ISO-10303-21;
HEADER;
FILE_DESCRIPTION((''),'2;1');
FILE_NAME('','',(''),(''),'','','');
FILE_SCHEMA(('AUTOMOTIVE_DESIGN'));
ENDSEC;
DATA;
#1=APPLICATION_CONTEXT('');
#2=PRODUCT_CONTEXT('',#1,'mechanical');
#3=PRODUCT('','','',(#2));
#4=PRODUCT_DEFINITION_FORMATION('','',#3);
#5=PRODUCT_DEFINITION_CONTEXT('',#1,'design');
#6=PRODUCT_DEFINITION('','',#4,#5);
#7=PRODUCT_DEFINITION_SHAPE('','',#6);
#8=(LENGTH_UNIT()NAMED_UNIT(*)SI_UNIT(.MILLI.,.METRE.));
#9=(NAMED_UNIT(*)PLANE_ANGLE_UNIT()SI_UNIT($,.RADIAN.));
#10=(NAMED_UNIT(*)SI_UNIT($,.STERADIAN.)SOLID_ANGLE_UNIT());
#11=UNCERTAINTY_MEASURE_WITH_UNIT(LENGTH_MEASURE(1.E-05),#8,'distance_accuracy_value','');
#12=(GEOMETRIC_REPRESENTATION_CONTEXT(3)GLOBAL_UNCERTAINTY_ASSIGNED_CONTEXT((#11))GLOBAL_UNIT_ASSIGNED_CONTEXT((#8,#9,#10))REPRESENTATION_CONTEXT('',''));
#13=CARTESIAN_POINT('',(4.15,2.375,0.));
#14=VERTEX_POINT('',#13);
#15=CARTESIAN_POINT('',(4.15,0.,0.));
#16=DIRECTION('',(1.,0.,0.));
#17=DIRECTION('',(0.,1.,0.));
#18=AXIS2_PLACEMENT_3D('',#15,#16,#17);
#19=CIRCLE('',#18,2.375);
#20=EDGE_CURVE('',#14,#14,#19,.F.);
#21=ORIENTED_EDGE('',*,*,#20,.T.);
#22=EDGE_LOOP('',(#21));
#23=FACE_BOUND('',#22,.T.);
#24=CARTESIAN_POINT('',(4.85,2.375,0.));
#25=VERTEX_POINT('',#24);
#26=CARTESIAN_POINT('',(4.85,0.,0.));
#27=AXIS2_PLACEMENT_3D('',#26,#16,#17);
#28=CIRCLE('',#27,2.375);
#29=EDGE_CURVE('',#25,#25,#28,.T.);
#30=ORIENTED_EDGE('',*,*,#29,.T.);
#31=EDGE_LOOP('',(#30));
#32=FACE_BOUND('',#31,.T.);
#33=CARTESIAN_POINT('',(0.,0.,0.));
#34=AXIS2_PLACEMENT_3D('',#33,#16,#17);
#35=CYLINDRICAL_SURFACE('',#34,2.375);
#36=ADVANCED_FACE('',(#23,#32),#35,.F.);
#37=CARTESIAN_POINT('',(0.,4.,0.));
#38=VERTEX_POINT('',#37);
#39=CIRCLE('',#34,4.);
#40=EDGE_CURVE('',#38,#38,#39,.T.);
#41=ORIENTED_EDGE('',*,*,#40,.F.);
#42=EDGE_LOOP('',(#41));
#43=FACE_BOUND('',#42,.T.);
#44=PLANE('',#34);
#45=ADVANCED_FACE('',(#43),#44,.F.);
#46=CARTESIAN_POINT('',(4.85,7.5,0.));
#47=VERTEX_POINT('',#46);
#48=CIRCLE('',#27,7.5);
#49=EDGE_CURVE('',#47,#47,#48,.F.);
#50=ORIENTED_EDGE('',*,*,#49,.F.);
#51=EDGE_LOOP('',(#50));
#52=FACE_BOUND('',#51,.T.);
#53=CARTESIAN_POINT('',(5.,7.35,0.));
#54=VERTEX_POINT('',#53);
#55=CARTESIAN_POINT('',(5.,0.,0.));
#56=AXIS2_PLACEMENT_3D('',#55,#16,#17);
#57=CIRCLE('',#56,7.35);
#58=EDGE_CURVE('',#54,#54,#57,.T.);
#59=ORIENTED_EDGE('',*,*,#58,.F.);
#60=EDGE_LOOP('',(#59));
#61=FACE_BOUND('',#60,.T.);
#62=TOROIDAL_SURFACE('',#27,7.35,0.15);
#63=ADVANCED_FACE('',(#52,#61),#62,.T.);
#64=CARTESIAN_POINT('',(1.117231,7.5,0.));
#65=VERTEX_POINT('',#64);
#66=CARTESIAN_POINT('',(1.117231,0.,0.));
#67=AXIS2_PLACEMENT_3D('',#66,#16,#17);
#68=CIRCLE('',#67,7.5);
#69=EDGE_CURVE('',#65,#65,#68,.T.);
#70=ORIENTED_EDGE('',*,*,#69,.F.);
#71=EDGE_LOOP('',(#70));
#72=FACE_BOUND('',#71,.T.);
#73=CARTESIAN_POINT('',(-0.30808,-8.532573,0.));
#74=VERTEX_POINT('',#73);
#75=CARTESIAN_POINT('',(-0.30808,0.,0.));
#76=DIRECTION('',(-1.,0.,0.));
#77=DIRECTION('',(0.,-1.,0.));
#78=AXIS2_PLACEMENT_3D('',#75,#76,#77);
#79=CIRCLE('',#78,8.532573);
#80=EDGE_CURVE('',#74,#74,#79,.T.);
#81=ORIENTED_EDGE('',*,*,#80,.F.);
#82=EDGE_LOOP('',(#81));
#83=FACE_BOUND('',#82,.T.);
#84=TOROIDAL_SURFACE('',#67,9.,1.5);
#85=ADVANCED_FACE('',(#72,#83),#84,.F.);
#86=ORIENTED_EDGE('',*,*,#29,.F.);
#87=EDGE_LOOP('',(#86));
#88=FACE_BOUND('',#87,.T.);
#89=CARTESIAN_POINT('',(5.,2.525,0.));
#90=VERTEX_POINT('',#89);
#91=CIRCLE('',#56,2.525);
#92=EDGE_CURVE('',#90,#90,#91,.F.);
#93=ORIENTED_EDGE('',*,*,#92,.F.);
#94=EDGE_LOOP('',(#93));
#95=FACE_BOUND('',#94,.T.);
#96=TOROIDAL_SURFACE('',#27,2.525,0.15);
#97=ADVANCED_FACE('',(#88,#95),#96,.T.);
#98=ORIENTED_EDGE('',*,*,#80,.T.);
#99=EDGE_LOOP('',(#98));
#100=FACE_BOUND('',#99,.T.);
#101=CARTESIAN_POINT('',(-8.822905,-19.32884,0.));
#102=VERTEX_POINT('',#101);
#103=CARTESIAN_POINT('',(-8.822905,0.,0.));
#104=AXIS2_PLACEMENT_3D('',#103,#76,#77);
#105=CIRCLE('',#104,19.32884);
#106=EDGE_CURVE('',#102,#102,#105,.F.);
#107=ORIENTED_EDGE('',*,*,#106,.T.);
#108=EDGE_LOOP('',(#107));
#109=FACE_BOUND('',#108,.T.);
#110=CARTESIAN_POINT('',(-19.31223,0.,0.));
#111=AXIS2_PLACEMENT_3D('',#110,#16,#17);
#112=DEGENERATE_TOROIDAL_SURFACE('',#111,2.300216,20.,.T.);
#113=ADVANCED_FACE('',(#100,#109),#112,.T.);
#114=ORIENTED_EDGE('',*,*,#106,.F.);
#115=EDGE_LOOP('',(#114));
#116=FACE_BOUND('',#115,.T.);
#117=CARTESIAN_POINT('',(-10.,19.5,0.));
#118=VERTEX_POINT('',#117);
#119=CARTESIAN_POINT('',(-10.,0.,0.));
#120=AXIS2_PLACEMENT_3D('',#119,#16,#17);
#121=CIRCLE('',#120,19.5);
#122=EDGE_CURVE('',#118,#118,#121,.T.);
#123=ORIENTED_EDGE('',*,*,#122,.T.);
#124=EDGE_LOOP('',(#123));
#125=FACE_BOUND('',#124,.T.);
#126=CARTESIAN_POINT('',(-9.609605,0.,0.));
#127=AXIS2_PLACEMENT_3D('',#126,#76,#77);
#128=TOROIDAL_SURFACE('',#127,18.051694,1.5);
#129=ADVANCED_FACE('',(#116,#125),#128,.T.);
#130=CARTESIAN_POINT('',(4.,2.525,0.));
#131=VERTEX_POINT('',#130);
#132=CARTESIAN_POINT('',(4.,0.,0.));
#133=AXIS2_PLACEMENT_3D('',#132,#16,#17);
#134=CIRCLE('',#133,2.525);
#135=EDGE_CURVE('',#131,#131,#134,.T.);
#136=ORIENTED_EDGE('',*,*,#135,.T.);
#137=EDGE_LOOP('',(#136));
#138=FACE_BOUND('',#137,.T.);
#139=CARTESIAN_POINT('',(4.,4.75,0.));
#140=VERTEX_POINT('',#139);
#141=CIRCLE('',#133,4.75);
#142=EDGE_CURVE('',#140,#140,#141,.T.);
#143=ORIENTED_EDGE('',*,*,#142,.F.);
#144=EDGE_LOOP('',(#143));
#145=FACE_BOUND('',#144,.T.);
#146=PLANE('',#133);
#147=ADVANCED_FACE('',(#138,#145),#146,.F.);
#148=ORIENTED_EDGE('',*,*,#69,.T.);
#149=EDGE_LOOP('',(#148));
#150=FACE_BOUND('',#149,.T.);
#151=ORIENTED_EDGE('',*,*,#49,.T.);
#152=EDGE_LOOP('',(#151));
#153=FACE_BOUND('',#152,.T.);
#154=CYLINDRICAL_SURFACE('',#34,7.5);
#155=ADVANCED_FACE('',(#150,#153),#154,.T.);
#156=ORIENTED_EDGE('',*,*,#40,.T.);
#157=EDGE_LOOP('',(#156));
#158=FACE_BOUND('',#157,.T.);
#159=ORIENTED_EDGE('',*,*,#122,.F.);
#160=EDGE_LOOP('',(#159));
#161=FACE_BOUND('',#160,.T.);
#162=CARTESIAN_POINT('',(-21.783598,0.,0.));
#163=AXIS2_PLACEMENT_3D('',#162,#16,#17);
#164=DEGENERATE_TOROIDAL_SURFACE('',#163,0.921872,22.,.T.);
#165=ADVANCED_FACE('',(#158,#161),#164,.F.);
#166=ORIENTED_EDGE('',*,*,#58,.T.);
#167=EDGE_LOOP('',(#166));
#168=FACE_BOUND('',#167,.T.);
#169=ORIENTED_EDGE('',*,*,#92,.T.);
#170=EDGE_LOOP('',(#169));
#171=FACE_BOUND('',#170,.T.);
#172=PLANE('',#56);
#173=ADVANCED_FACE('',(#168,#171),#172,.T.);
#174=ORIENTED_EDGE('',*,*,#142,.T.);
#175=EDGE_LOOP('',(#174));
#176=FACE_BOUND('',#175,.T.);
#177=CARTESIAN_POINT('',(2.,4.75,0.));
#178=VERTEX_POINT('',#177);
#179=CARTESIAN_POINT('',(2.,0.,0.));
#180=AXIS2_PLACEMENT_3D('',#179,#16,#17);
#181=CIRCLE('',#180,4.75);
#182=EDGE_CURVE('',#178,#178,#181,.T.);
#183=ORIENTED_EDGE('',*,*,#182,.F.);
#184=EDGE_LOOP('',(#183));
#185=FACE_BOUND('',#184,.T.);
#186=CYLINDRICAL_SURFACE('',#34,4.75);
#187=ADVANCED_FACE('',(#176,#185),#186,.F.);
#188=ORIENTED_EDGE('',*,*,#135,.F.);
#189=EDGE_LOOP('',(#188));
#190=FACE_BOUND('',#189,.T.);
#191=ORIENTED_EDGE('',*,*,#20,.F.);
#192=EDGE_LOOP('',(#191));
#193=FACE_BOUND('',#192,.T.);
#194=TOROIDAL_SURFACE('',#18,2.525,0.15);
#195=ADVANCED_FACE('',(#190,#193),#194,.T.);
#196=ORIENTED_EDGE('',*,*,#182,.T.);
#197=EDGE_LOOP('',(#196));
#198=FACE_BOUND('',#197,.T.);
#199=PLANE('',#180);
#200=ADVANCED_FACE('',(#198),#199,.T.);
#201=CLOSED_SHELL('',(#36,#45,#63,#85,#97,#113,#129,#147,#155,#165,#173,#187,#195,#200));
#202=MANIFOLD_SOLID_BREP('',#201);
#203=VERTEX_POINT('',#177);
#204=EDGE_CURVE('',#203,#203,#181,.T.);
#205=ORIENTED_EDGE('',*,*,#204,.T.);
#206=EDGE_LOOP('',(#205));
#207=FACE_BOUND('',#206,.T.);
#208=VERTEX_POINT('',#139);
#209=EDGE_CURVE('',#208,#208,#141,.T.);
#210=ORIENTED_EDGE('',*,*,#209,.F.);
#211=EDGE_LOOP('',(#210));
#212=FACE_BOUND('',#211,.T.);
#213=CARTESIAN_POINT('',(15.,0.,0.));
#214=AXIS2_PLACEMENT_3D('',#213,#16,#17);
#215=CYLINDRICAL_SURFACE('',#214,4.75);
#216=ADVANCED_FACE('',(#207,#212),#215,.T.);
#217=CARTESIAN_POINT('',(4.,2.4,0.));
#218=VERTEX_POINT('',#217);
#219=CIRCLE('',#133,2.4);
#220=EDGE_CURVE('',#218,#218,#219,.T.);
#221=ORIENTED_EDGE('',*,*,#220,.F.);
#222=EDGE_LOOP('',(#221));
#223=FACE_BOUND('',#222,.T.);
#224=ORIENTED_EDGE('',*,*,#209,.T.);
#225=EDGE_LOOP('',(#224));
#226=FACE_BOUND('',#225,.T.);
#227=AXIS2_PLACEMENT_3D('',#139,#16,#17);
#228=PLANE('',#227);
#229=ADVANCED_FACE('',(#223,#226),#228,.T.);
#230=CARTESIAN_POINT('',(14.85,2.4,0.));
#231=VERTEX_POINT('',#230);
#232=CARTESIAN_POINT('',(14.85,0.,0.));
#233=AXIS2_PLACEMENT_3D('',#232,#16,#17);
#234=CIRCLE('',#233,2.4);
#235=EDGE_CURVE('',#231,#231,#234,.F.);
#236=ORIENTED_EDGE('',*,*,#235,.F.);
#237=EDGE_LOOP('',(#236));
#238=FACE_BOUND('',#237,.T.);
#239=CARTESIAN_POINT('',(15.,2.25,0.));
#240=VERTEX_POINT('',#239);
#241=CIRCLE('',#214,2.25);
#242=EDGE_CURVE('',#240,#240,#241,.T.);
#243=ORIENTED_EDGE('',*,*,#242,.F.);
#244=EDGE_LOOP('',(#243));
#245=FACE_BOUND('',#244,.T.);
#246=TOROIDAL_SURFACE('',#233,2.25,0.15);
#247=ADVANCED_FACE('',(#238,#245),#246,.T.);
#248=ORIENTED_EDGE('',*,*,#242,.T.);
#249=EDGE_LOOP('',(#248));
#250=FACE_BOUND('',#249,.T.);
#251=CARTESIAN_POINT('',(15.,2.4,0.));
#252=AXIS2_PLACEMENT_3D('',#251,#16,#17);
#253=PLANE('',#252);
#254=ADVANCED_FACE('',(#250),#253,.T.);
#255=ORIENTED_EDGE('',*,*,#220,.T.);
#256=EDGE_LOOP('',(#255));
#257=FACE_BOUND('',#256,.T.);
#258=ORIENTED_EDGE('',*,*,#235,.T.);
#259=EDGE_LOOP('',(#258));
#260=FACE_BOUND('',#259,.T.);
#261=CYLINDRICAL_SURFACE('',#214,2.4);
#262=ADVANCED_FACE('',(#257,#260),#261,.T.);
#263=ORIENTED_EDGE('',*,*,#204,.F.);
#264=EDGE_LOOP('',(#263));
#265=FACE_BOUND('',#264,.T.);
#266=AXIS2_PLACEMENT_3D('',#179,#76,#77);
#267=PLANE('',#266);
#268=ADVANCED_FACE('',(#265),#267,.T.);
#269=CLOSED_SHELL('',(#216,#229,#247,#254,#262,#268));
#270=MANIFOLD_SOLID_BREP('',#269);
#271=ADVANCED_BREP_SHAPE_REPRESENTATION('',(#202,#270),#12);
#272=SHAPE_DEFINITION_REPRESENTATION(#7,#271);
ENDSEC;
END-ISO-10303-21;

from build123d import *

# Parameters (mm, degrees)
FILLET1_R = 0.15
FILLET2_R = 1.5
FILLET3_R = 0.15


with BuildPart() as part:
    # Sketch1 → Revolve1 (revolve)
    with BuildSketch(Plane.XY):
        with BuildLine():
            Line((-4.6e-16, 4.000000000000002), (0, 0))
            Line((0, 0), (2, 0))
            Line((2, 0), (2, 4.75))
            Line((2, 4.75), (4, 4.75))
            Line((4, 4.75), (4, 2.375))
            Line((4, 2.375), (5, 2.375))
            Line((5, 2.375), (4.999999999999999, 7.5))
            Line((4.999999999999999, 7.5), (-8.7e-16, 7.5))
            ThreePointArc((0, 7.5), (-3.6948542111989937, 14.794116631040804), (-9.999999999999998, 20))
            Line((-10, 20), (-10, 19.5))
            ThreePointArc((-9.999999999999995, 19.500000000000004), (-3.297071481987519, 12.848663560008053), (7.11e-15, 4.000000000000002))
        make_face()
    revolve(axis=Axis((0, 0, 0), (-1, -1.2e-16, 0)))

    # Fillet1
    fillet1_edges = [part.edges().sort_by_distance(p)[0] for p in [
        (5, -2.374999999999999, -2.9e-16),
        (4, -2.374999999999999, -2.9e-16),
        (5.000000000000001, -7.499999999999998, -9.2e-16),
    ]]
    fillet(fillet1_edges, radius=FILLET1_R)

    # Fillet2
    # the kernel refuses this fillet: 1.5 mm, written as the material it adds along each edge
    with BuildSketch(Plane(origin=(2.26e-15, 0, 0), x_dir=(-1.2e-16, 1, 0), z_dir=(0, 0, 1))) as fillet2_piece_1:
        with BuildLine():
            CenterArc((9, -1.1172309258012287), FILLET2_R, 108.1567582497087, 71.84324175029133)
            ThreePointArc((8.532573186973417, 0.308080329491387), (8.018361800934953, 0.14708482432521688), (7.5, 0))
            Line((7.5, 0), (7.5, -1.1172309258012287))
        make_face()
    revolve(axis=Axis((2.26e-15, 0, 0), (-1, -1.2e-16, 0)))
    # the kernel refuses this fillet: 1.5 mm, written as the material it takes off along each edge
    with BuildSketch(Plane(origin=(-9.999999999999996, -1.22e-15, 0), x_dir=(-9e-17, 1, 0), z_dir=(0, 0, 1))) as fillet2_2_piece_1:
        with BuildLine():
            CenterArc((18.05169355974905, -0.39039525500277056), FILLET2_R, 328.3676814772994, 46.718016592573825)
            Line((19.499999999999662, -9.055e-14), (20, 1.78e-15))
            ThreePointArc((20, 1.78e-15), (19.674391539993568, -0.5942328025349592), (19.328840414867702, -1.1770946324402587))
        make_face()
    revolve(axis=Axis((-9.999999999999996, -1.22e-15, 0), (-1, -1.2e-16, 0)), mode=Mode.SUBTRACT)


with BuildPart() as body_2:
    # Sketch2 → Revolve2 (revolve)
    with BuildSketch(Plane.XY):
        Polygon((2.0000000000000004, 0), (2, 4.75), (4, 4.75), (4, 2.4), (15.000000000000002, 2.4), (15, 1.12e-15), align=None)
    revolve(axis=Axis((15, 1.12e-15, 0), (-1, -9e-17, 0)))

    # Fillet3
    fillet3_edges = [body_2.edges().sort_by_distance(p)[0] for p in [
        (15.000000000000002, -2.3999999999999972, -2.9e-16),
    ]]
    fillet(fillet3_edges, radius=FILLET3_R)


solid = Compound([part.part, body_2.part])
